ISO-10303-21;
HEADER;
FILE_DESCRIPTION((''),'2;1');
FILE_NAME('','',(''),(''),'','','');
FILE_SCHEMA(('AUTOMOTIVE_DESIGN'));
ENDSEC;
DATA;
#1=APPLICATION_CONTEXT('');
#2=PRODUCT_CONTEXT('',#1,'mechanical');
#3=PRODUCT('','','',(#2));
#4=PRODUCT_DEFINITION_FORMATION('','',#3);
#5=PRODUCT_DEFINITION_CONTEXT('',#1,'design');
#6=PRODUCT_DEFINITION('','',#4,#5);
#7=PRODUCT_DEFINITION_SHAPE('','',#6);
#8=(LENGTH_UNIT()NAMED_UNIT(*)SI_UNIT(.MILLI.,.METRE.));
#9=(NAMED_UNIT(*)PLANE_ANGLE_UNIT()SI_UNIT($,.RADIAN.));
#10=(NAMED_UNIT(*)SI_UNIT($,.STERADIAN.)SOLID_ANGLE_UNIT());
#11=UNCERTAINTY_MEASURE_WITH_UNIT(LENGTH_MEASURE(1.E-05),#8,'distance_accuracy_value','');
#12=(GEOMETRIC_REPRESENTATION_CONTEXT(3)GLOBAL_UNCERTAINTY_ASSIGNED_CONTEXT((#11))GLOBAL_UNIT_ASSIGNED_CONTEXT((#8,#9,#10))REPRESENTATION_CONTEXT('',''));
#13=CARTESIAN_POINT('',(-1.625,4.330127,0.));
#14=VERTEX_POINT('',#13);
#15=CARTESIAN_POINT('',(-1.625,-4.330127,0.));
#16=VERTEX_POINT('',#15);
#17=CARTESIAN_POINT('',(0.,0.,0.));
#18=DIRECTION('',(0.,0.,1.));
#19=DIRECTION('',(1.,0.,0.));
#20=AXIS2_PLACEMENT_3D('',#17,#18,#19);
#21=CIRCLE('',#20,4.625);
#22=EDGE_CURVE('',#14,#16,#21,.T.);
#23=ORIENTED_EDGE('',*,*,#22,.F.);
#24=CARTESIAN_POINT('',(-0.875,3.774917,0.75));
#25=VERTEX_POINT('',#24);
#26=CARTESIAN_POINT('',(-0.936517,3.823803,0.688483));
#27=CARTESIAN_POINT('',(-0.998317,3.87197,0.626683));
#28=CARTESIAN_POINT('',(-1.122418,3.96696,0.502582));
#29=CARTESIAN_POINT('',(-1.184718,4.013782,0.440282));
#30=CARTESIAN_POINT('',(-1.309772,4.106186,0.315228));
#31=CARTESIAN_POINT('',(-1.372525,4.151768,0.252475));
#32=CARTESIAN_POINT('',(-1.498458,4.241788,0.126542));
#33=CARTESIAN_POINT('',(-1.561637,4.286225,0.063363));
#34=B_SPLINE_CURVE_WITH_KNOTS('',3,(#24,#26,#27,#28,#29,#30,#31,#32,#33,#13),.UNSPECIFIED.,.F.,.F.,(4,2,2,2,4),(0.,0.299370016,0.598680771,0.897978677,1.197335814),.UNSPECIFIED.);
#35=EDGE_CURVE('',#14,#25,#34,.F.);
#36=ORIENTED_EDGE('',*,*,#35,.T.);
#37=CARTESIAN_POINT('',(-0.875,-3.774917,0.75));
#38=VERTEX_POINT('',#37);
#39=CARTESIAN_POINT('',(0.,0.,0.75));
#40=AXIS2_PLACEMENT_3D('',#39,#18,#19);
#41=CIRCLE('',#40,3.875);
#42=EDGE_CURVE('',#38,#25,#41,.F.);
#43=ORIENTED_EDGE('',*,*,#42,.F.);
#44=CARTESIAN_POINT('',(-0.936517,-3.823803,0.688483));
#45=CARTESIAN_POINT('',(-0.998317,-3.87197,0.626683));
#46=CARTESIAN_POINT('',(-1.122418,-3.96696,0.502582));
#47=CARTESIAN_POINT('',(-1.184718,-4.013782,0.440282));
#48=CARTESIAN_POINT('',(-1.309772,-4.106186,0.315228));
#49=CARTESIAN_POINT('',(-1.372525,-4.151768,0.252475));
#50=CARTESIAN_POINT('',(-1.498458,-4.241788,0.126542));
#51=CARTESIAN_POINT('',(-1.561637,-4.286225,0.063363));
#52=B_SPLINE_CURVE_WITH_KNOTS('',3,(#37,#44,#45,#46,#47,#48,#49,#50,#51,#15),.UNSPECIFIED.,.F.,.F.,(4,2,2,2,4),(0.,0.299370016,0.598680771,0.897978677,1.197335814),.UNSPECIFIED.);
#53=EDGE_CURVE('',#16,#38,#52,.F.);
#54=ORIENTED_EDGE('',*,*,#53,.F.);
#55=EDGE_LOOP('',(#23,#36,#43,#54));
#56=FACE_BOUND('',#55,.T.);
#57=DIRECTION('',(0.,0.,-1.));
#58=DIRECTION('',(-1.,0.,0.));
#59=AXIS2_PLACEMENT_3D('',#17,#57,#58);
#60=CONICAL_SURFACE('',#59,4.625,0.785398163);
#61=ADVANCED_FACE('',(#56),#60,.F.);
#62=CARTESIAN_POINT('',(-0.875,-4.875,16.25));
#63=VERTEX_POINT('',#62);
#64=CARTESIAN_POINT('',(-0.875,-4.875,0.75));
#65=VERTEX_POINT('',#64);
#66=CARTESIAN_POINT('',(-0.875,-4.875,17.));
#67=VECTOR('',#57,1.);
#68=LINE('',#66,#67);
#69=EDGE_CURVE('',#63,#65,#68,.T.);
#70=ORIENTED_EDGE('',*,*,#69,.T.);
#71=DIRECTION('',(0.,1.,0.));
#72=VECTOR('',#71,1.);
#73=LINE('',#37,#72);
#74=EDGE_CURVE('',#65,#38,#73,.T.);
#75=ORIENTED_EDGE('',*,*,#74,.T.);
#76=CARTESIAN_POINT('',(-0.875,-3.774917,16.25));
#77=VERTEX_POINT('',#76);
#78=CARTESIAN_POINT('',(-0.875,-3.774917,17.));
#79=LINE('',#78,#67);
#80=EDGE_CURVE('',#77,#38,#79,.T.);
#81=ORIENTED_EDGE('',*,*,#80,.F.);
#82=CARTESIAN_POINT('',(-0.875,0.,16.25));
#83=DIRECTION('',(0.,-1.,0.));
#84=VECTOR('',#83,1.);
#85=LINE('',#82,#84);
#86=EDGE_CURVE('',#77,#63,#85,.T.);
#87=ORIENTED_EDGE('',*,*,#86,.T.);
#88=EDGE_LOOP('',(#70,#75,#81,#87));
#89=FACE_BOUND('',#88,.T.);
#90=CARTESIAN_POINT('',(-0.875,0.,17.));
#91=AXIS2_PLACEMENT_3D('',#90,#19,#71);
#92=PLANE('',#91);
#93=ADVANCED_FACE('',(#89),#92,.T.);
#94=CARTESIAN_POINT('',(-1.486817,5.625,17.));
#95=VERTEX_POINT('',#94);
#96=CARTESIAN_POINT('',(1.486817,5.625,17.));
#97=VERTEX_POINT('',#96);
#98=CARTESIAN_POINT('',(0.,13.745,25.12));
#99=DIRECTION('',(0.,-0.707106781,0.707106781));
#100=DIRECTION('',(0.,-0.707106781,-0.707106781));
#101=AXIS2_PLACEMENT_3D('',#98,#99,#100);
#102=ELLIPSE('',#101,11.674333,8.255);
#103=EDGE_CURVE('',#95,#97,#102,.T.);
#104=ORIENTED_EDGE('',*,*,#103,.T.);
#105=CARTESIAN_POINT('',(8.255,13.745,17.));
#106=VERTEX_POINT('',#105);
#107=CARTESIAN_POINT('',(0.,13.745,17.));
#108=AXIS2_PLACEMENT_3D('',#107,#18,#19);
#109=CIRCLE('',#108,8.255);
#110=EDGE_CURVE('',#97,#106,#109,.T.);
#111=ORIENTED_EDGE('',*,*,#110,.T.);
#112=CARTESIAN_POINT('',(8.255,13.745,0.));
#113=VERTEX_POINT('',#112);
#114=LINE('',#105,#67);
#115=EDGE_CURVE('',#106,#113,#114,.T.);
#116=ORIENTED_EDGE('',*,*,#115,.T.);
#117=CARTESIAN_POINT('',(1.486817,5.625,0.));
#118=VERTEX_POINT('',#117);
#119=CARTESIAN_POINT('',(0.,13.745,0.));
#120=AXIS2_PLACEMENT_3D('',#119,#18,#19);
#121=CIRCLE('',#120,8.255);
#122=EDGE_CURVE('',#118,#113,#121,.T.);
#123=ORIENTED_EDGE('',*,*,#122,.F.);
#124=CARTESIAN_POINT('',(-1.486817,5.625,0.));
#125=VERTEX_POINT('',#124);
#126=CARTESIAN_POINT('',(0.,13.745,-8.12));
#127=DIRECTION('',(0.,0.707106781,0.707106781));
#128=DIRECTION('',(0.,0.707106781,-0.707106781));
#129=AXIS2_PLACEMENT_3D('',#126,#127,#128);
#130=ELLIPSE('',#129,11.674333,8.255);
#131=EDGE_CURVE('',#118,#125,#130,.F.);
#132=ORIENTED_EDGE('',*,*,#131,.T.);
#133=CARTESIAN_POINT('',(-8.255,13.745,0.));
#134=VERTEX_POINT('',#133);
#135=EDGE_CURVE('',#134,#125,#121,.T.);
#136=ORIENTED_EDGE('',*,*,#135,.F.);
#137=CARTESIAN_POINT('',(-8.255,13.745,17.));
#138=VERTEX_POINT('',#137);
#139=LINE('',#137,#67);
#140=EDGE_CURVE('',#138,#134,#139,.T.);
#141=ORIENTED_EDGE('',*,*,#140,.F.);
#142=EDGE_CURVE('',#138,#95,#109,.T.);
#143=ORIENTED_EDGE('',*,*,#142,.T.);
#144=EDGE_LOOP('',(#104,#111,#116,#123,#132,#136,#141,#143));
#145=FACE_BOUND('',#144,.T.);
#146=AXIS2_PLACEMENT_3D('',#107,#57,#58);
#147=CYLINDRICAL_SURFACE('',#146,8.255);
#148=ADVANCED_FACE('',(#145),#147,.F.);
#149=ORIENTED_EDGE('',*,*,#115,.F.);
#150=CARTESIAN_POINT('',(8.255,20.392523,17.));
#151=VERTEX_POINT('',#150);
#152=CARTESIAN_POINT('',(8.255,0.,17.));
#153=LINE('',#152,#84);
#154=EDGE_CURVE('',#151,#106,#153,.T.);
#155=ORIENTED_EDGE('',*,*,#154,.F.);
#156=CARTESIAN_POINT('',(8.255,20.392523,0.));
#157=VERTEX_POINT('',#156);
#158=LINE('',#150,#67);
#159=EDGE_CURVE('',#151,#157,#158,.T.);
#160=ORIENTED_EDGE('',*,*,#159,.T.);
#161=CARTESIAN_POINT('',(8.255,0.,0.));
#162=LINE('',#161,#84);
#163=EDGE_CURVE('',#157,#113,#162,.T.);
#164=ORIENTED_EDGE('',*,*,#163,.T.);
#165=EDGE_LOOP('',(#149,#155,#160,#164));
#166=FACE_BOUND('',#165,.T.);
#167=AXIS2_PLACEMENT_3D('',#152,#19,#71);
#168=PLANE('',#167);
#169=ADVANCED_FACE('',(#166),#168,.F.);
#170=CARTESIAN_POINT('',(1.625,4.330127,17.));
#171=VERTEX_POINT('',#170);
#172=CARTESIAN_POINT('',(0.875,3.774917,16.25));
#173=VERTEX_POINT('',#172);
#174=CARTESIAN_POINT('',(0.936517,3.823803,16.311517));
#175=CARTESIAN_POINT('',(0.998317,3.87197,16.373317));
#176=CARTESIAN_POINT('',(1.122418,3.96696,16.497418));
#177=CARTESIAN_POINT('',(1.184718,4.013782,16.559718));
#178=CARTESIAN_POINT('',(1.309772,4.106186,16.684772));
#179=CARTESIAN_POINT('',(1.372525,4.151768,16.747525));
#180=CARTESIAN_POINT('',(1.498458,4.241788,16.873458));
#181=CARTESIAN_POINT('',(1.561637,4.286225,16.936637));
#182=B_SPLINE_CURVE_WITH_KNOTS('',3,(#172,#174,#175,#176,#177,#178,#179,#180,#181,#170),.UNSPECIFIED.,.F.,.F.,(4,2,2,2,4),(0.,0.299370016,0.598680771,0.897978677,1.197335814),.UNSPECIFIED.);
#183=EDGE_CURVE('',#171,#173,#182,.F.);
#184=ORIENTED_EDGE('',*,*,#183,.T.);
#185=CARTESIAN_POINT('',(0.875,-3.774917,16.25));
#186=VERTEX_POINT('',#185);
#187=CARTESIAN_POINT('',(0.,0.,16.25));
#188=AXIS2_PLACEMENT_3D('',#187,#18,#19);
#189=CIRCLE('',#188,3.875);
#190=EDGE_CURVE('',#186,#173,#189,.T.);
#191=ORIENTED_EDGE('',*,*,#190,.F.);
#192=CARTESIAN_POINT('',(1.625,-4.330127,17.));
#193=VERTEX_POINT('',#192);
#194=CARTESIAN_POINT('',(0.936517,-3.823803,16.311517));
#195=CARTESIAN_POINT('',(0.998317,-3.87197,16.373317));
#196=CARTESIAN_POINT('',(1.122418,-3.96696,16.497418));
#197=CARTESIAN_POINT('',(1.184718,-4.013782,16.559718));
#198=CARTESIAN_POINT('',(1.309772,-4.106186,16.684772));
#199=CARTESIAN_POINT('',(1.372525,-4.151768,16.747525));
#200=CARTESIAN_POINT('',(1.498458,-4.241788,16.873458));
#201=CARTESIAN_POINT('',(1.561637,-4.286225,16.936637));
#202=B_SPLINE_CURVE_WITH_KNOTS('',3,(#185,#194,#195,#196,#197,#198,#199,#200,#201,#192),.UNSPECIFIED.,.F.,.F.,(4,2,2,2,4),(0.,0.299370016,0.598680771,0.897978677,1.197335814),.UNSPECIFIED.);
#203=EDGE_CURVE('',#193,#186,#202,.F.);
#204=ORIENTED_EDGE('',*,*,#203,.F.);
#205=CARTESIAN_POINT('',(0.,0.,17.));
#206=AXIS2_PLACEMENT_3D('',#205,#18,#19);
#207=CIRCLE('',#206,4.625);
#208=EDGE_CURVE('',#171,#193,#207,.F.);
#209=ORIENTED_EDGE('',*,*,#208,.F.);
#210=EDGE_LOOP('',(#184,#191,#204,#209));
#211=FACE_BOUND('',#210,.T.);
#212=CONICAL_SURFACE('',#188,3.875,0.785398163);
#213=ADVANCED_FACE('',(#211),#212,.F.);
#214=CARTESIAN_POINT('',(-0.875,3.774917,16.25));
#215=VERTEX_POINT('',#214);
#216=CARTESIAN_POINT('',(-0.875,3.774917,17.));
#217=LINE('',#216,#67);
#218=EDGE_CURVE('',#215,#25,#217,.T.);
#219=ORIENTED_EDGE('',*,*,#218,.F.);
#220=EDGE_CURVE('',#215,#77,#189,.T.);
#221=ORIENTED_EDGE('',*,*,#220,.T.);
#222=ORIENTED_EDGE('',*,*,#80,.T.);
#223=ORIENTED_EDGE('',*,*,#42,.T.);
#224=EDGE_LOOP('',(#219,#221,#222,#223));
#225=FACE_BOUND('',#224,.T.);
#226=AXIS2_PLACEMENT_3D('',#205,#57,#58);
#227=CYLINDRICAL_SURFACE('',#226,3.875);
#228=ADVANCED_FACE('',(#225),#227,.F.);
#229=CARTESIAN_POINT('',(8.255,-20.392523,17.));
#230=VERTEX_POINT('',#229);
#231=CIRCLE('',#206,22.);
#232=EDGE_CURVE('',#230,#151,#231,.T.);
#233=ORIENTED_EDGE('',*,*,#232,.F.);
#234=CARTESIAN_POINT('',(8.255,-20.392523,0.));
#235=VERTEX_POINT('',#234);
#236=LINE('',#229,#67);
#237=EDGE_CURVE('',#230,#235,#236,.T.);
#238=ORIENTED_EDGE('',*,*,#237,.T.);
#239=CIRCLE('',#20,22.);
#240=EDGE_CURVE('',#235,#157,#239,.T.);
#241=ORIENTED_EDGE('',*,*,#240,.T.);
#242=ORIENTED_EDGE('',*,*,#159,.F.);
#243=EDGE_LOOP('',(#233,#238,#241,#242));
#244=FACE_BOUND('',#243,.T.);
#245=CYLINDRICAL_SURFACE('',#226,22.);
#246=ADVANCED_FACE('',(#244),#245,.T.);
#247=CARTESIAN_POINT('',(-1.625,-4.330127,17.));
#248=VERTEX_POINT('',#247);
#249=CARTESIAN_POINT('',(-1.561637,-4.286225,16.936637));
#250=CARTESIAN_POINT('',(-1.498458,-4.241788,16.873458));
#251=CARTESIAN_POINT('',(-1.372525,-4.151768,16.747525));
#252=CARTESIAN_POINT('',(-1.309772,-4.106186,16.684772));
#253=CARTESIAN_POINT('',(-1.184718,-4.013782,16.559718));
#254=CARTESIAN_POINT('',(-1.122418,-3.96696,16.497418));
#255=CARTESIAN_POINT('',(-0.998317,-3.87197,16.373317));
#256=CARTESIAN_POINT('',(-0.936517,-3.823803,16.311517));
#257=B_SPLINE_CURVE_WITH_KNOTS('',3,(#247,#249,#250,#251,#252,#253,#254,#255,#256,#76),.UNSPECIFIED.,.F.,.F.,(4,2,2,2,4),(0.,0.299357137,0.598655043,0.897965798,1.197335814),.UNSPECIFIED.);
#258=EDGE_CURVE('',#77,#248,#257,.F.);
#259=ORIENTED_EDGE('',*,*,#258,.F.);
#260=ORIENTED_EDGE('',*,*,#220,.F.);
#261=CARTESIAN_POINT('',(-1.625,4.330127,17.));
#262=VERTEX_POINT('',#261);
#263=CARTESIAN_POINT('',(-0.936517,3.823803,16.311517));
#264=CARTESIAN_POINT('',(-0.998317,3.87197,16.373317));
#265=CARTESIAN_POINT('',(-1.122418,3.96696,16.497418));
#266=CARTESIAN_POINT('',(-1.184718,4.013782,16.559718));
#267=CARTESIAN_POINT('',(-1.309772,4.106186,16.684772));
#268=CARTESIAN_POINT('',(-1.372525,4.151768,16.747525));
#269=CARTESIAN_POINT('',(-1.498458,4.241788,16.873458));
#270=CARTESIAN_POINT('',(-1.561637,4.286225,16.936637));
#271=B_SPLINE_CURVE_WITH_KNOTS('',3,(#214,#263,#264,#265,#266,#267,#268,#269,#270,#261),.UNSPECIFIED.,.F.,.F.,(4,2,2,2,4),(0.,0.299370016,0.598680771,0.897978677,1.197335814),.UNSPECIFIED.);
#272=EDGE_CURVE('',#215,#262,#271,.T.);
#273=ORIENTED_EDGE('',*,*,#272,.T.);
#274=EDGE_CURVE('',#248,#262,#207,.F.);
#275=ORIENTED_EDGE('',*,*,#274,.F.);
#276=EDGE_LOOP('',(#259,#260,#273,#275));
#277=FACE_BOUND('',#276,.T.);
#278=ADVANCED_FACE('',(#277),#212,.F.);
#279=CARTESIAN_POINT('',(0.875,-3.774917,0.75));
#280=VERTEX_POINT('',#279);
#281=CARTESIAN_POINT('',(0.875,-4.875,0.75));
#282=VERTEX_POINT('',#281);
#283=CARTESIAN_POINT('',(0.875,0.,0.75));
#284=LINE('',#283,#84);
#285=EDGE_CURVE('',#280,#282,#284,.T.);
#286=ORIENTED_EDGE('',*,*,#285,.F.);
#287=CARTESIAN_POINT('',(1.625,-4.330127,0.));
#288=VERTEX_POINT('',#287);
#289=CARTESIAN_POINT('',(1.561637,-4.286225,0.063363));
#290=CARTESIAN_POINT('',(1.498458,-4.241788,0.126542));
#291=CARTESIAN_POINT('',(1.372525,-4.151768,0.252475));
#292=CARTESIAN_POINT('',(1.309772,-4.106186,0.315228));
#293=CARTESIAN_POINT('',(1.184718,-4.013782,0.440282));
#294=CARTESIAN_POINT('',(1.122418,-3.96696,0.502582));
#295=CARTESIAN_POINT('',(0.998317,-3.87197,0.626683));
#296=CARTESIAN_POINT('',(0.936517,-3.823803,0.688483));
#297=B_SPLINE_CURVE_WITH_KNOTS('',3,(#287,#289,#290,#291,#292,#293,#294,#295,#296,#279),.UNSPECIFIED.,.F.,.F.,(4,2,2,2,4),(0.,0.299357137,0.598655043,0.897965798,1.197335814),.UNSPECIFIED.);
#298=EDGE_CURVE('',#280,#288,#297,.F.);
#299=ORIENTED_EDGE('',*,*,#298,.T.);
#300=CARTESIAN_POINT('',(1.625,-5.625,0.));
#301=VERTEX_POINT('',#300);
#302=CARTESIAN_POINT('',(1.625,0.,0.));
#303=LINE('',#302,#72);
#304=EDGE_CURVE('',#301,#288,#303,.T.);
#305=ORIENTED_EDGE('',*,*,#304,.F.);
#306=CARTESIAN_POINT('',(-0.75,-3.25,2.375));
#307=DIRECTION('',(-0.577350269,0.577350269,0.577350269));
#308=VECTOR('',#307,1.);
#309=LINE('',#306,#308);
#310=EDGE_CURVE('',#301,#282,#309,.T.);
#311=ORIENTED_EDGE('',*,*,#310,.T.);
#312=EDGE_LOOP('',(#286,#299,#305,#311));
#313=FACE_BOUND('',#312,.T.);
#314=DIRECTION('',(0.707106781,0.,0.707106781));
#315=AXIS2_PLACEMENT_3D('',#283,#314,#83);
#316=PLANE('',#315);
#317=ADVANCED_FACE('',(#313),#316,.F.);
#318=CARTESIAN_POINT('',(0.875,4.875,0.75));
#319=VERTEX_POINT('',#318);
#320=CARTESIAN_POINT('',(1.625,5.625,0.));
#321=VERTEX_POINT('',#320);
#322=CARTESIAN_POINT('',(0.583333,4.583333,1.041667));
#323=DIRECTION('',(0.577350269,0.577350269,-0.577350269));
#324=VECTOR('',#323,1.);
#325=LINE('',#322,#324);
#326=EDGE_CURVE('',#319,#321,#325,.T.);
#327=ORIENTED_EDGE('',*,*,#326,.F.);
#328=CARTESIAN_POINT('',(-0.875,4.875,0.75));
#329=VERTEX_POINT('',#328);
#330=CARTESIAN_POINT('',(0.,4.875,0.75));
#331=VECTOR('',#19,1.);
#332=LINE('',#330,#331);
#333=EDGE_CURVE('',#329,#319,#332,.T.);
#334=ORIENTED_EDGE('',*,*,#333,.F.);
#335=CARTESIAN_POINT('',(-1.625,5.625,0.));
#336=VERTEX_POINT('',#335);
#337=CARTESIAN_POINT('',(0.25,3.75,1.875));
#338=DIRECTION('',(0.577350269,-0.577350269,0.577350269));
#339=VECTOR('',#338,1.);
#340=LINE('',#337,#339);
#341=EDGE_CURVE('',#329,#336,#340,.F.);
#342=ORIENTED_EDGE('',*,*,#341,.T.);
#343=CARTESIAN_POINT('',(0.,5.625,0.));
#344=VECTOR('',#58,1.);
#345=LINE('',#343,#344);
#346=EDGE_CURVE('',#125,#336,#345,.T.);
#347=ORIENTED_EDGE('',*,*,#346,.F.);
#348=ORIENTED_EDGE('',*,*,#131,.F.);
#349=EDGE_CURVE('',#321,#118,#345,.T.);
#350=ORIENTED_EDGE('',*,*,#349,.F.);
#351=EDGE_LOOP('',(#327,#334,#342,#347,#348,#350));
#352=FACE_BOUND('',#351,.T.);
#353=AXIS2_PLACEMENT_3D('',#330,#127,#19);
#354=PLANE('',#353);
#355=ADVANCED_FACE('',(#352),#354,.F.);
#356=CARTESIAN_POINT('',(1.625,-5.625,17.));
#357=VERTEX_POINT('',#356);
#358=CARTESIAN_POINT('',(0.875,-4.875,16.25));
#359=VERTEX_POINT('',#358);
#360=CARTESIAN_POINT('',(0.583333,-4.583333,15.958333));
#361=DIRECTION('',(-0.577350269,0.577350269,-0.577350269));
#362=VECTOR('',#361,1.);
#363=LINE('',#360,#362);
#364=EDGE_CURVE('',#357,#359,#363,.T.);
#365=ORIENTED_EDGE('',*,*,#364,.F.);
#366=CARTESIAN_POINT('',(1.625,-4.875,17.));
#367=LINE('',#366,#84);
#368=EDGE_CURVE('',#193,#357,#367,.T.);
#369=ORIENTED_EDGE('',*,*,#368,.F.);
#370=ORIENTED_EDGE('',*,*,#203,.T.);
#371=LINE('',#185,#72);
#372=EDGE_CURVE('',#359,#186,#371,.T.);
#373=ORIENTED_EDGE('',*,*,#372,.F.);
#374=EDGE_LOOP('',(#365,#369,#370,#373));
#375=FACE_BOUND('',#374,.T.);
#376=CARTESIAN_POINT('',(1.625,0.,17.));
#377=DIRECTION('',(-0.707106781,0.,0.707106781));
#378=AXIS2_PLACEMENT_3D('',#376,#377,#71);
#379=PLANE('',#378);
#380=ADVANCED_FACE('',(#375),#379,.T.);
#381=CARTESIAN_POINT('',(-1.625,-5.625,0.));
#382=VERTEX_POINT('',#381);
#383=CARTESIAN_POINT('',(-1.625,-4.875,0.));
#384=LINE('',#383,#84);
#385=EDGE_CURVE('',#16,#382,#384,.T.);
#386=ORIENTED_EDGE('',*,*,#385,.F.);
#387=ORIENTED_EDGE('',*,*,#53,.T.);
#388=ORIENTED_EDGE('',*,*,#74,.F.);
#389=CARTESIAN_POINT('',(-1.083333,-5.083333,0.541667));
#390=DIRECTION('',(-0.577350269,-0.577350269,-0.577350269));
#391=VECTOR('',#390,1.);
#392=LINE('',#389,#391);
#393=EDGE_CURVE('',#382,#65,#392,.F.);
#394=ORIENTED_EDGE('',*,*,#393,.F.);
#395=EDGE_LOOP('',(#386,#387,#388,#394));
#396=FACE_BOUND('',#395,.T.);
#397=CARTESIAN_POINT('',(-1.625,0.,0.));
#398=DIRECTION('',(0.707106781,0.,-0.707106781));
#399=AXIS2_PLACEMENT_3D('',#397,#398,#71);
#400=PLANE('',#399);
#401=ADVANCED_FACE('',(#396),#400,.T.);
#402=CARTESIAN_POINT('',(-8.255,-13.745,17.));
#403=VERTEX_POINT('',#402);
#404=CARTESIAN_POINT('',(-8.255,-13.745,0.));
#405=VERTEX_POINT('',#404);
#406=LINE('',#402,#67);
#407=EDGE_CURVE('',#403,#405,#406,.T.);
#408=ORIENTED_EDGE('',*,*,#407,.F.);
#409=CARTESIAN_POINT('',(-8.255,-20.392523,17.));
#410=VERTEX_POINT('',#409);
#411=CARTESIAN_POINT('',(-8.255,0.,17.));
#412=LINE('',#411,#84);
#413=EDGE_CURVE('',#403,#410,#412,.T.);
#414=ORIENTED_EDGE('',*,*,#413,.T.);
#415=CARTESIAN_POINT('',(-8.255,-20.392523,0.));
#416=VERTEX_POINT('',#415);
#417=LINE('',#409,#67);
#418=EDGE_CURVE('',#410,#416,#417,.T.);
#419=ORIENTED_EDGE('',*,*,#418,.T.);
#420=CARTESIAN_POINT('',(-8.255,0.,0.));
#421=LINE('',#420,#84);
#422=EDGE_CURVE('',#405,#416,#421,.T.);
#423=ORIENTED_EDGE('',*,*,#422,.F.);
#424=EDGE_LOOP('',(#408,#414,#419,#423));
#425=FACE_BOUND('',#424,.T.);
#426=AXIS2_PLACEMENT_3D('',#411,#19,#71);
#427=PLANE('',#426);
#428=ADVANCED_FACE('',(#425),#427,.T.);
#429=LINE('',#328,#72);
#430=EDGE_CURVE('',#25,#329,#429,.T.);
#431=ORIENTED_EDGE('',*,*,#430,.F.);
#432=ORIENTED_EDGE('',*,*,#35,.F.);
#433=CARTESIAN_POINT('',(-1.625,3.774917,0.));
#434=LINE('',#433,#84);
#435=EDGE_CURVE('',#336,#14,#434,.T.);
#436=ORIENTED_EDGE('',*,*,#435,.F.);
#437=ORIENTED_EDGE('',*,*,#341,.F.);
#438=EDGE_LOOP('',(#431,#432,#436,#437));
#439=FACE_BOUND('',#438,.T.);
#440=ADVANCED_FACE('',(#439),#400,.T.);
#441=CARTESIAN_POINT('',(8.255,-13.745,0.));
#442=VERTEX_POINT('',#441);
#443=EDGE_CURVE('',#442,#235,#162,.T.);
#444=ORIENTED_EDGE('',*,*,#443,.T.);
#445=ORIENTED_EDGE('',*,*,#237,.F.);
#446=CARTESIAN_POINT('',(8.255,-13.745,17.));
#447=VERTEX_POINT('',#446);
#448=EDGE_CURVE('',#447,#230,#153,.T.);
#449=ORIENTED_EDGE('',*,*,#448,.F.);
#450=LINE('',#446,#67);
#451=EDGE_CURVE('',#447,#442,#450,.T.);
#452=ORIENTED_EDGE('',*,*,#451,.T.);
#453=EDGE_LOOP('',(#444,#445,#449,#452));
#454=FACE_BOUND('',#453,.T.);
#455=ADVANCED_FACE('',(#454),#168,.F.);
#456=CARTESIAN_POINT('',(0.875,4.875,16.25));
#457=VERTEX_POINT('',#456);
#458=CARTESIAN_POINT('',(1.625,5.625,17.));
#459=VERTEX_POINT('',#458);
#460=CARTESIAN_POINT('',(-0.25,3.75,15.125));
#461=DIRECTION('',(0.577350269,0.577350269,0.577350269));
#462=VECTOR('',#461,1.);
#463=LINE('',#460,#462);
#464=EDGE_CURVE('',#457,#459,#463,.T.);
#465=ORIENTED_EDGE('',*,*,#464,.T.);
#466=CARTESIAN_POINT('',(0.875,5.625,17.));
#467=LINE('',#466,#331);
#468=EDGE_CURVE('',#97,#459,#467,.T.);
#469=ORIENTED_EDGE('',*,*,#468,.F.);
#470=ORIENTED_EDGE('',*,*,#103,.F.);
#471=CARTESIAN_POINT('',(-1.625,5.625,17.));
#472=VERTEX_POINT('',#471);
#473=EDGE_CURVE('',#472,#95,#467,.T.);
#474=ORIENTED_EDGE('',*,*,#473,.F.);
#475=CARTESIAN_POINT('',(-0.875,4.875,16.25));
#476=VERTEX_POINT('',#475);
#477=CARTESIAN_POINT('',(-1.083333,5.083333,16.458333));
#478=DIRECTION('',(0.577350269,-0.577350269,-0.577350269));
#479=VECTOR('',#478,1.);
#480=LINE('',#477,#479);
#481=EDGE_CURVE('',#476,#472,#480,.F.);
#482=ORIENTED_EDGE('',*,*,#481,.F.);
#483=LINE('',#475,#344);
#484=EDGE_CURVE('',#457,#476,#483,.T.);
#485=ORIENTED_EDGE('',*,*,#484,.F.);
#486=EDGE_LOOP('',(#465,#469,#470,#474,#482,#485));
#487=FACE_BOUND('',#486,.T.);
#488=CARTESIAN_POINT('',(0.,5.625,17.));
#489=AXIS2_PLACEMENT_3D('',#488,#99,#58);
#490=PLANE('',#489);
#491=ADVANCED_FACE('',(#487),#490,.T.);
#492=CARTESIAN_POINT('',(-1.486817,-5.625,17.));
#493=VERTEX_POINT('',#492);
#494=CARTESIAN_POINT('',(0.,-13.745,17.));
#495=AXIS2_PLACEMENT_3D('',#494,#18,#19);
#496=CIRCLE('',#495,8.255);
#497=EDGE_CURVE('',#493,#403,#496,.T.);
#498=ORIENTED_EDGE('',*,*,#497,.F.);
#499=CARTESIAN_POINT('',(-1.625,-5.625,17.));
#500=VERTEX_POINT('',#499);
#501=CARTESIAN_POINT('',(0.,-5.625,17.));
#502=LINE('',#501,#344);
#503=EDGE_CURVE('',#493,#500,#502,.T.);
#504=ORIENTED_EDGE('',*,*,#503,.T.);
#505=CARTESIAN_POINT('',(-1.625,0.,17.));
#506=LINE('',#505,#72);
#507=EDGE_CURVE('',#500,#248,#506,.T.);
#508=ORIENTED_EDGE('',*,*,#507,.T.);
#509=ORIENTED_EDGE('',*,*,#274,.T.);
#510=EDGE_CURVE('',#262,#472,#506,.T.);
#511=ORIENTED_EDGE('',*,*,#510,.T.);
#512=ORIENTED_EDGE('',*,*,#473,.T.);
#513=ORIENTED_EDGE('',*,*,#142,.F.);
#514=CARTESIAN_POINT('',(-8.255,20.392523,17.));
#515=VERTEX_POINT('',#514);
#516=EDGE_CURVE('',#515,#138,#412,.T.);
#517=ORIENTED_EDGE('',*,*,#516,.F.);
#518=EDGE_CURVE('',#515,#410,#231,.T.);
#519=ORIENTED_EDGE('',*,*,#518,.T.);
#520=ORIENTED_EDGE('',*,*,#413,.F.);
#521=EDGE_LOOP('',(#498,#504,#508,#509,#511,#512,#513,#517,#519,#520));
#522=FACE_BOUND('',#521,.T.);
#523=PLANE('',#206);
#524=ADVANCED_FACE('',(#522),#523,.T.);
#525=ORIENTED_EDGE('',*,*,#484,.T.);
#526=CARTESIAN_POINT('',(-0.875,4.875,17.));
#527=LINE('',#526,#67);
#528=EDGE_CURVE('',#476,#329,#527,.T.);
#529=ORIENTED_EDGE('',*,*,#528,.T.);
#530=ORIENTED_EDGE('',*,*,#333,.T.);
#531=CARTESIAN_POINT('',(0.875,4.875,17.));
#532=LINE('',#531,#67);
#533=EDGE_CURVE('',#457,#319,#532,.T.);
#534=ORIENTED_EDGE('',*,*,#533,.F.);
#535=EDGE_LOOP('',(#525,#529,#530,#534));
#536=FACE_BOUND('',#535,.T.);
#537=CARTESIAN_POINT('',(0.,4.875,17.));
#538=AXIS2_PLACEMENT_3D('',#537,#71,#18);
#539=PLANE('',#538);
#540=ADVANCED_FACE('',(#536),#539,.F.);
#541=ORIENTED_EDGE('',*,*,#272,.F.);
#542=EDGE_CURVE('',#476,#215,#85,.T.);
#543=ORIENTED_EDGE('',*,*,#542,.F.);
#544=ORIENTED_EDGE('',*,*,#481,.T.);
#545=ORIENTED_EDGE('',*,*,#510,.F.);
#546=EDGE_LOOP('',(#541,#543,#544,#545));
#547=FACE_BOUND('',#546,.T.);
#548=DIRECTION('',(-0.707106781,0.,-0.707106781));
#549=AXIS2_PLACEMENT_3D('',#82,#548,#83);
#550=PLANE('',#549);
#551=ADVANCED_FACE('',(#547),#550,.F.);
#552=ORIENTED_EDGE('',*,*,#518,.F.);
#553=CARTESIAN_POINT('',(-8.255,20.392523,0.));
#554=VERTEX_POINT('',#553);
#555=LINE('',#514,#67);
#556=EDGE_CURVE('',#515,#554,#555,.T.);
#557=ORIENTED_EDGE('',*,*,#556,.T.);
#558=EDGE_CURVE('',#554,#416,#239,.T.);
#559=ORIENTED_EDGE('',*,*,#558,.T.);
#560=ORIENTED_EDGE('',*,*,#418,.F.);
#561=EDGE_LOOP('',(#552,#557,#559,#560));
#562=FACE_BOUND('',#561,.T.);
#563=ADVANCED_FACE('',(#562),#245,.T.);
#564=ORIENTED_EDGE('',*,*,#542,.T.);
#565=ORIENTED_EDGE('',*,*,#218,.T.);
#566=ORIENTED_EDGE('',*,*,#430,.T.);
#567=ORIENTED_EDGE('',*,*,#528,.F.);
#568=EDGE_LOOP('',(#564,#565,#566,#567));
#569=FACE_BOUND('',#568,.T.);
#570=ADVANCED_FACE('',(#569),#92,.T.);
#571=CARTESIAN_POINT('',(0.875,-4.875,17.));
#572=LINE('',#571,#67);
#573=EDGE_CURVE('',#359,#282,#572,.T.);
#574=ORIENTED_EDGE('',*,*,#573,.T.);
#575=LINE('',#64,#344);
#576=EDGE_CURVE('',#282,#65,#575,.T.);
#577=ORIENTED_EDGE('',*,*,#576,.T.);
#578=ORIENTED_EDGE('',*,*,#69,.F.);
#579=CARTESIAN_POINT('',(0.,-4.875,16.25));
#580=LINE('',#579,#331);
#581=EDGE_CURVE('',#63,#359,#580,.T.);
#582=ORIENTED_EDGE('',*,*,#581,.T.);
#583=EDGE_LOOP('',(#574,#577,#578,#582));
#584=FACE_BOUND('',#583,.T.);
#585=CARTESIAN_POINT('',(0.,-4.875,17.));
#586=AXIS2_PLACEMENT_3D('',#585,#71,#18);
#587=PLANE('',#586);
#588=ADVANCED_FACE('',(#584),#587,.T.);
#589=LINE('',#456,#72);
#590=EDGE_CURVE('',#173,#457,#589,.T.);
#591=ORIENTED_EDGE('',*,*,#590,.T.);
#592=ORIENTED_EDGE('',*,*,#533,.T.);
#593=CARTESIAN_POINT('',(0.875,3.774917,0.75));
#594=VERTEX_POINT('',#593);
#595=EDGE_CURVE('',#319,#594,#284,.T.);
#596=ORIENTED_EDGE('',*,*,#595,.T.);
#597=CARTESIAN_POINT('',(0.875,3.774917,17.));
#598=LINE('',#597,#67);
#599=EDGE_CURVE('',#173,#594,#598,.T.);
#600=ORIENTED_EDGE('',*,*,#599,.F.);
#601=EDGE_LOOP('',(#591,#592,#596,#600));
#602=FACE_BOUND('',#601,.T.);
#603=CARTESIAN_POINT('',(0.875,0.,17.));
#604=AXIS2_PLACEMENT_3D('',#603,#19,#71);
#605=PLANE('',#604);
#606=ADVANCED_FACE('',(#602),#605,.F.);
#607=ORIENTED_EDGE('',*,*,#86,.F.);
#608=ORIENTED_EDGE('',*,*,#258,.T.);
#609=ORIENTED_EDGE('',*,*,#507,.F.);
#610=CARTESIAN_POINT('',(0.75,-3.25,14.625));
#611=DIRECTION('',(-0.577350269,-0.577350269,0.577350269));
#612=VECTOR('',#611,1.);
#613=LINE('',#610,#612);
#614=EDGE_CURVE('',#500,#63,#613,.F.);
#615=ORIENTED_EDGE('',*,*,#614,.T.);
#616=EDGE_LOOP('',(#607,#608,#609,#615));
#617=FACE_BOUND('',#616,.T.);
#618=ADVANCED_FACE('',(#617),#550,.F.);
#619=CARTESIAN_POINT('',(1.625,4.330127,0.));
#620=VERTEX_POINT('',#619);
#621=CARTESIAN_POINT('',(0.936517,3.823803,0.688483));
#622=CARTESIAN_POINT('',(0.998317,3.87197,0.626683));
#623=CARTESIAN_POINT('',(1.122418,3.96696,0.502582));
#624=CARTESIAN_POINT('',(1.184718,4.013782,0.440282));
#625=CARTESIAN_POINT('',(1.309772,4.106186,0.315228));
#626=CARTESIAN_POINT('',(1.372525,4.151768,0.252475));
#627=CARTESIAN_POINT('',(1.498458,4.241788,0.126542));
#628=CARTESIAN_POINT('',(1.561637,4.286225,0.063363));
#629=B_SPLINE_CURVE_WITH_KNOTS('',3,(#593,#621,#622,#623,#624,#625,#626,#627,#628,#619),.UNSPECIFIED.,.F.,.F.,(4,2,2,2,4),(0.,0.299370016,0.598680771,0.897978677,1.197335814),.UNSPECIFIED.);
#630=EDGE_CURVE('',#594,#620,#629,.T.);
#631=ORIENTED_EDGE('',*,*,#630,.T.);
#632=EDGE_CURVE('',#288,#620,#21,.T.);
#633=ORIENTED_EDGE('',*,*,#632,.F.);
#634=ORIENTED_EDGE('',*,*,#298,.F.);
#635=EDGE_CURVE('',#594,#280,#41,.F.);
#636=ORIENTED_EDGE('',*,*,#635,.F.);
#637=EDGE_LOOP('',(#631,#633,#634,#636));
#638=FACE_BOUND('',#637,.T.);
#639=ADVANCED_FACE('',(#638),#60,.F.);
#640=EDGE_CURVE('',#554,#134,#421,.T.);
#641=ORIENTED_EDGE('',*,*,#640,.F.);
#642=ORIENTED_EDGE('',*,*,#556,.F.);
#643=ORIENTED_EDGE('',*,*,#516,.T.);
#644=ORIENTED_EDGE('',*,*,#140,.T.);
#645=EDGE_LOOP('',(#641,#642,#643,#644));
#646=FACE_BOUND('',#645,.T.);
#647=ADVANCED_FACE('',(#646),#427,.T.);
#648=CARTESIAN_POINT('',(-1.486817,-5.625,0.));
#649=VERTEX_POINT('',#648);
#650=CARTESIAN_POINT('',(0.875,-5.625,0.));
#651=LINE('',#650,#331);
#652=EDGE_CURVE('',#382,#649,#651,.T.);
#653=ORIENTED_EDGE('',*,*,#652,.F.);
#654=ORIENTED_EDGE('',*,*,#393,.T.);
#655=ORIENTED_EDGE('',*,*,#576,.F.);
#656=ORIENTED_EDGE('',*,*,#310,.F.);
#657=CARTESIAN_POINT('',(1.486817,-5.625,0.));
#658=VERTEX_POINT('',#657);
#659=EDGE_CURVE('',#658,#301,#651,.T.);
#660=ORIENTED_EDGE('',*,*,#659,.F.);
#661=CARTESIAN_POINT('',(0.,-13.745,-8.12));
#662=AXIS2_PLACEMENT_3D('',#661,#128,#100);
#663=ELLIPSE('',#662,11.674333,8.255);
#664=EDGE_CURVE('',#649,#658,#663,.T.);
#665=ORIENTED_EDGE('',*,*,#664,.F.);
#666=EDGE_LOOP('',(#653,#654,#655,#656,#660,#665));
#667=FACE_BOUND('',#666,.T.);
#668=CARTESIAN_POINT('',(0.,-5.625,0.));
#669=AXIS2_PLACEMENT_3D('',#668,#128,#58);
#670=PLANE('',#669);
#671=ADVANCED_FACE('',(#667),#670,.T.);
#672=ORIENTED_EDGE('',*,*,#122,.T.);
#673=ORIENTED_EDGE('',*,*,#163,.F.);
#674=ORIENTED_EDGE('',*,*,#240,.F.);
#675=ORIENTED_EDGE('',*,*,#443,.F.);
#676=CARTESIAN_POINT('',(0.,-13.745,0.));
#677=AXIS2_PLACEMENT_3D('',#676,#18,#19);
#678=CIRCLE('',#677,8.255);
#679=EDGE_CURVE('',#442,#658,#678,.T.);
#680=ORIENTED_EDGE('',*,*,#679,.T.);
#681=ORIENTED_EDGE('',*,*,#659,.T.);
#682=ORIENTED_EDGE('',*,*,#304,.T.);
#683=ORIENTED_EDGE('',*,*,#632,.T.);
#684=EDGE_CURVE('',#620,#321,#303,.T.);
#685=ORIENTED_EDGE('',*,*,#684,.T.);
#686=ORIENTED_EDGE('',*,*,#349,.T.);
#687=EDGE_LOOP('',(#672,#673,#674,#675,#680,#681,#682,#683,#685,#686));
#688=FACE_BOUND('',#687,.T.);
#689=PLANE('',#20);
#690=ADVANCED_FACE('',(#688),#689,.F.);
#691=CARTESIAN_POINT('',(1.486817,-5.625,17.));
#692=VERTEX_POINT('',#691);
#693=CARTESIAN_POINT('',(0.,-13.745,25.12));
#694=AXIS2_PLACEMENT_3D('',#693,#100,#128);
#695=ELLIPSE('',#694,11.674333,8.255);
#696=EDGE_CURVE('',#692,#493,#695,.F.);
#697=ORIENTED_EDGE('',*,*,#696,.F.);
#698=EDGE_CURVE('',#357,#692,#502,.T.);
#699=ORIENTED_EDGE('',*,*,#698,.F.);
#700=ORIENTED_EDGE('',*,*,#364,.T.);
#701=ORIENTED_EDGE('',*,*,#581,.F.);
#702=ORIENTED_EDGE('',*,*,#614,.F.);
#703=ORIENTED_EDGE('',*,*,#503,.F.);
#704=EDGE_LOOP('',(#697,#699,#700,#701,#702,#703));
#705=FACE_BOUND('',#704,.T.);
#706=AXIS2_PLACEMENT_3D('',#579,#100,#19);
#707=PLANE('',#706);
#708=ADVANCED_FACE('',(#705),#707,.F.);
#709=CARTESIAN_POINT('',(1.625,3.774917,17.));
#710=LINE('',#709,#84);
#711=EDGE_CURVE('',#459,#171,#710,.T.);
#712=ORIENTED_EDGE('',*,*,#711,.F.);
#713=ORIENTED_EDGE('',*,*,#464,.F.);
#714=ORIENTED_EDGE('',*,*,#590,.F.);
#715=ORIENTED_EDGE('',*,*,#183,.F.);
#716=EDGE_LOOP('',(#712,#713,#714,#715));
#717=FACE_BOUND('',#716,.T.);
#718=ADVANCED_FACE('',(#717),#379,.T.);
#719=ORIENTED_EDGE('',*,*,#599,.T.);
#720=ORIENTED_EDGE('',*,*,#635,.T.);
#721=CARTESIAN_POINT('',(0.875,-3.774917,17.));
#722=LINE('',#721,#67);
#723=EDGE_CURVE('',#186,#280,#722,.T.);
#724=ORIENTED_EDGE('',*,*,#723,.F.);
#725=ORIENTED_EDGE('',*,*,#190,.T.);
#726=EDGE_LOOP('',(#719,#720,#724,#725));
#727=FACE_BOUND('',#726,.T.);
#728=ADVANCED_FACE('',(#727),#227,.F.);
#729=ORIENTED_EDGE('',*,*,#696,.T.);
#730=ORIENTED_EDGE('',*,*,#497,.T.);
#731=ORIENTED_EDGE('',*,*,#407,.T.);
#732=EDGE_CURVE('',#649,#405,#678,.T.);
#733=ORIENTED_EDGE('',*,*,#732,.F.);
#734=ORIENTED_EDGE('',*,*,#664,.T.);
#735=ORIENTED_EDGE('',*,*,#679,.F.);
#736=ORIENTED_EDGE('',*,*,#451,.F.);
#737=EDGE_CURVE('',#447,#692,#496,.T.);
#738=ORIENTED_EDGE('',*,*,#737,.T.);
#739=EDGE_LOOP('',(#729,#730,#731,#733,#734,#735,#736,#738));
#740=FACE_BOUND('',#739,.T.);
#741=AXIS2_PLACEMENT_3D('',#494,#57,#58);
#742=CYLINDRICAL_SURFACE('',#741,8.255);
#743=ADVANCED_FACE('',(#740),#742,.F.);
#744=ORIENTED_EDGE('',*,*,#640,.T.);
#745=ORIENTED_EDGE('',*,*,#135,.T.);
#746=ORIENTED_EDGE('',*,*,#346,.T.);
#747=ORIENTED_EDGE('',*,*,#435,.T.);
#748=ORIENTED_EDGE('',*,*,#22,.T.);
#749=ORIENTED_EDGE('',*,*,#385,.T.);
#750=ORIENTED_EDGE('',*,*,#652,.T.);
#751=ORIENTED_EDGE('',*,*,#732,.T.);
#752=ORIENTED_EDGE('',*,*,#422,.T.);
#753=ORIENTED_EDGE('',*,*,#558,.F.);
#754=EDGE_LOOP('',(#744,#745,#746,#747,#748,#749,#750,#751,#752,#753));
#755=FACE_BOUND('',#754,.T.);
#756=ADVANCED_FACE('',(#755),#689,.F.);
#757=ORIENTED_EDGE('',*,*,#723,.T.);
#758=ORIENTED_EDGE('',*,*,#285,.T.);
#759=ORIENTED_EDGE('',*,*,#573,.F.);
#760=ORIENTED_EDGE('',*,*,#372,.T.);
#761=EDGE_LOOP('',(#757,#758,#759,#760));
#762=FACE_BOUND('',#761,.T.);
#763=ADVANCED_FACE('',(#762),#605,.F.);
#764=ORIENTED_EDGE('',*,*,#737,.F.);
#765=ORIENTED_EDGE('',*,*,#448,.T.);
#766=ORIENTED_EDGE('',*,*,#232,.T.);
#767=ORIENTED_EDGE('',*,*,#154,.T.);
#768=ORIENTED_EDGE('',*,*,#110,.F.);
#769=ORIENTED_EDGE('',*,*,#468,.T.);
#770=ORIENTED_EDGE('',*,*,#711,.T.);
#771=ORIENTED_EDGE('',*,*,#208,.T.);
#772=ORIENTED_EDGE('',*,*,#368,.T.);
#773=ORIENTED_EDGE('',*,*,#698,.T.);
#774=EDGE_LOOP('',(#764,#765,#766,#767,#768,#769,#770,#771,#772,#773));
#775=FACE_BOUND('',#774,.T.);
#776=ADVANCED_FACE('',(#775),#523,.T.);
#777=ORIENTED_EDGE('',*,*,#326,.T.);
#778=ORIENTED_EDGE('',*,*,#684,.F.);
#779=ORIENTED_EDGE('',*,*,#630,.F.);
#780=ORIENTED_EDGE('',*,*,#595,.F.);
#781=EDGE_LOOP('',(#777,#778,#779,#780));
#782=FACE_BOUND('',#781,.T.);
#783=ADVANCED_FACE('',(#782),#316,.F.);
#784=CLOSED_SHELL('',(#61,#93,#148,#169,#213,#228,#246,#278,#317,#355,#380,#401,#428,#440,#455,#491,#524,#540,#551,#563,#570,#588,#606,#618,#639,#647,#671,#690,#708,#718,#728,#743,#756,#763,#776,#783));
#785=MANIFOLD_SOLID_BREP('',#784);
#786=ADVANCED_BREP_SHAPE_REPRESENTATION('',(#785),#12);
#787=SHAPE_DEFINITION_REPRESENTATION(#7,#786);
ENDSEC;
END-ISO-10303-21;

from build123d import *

# Parameters (mm, degrees)
BOSS_EXTRUDE1_DEPTH = 17
CHAMFER1_SIZE       = 0.75
CHAMFER2_SIZE       = 0.75


with BuildPart() as part:
    # Sketch1 → Boss-Extrude1 (new body)
    # profile 1 of 3: a face of its own
    with BuildSketch(Plane.XY):
        with BuildLine():
            Line((-8.255, 13.745), (-8.255, 20.392522527))
            ThreePointArc((-8.255, 20.392522527), (-22, 0), (-8.255, -20.392522527))
            Line((-8.255, -20.392522527), (-8.255, -13.745000015))
            Line((-8.255, -13.745000015), (-8.255, 13.745))
        make_face()
    # profile 2 of 3: a face of its own
    with BuildSketch(Plane.XY):
        with BuildLine():
            ThreePointArc((22, 0), (18.242943841, 12.296137605), (8.255, 20.392522527))
            Line((8.255, 20.392522527), (8.255, 13.745))
            Line((8.255, 13.745), (8.255, -13.745))
            Line((8.255, -13.745), (8.255, -20.392522527))
            ThreePointArc((8.255, -20.392522527), (18.242943841, -12.296137605), (22, 0))
        make_face()
    # profile 3 of 3: a face of its own
    with BuildSketch(Plane.XY):
        with BuildLine():
            ThreePointArc((8.255, 13.745), (0, 5.49), (-8.255, 13.745))
            Line((-8.255, 13.745), (-8.255, -13.745000015))
            ThreePointArc((-8.255, -13.745000015), (-7e-09, -5.49), (8.255, -13.745))
            Line((8.255, -13.745), (8.255, 13.745))
        make_face()
        with BuildLine():
            Line((-0.875, 3.774917218), (-0.875, 4.875))
            Line((-0.875, 4.875), (0.875, 4.875))
            Line((0.875, 4.875), (0.875, 3.774917218))
            ThreePointArc((0.875, 3.774917218), (3.033665275, 2.41091269), (3.875, 0))
            ThreePointArc((3.875, 0), (3.033665275, -2.41091269), (0.875, -3.774917218))
            Line((0.875, -3.774917218), (0.875, -4.875))
            Line((0.875, -4.875), (-0.875, -4.875))
            Line((-0.875, -4.875), (-0.875, -3.774917218))
            ThreePointArc((-0.875, -3.774917218), (-3.875, 0), (-0.875, 3.774917218))
        make_face(mode=Mode.SUBTRACT)
    extrude(amount=BOSS_EXTRUDE1_DEPTH)

    # Chamfer1
    # the kernel refuses this chamfer: 0.75 mm, written as the material it takes off along each edge
    with BuildSketch(Plane(origin=(-0.875, -4.875, 0), x_dir=(-1, 0, 0), z_dir=(0, 1, 0)), Plane(origin=(0.875, -1.846154977, 0), x_dir=(1, 0, 0), z_dir=(0, -1, 0)), Plane(origin=(0.875, 4.875, 0), x_dir=(1, 0, 0), z_dir=(0, -1, 0)), Plane(origin=(-0.875, 1.846154977, 0), x_dir=(-1, 0, 0), z_dir=(0, 1, 0))) as chamfer1_piece_1:
        Polygon((CHAMFER1_SIZE, 0), (0, CHAMFER1_SIZE), (0, 0), align=None)
    extrude(amount=3.028845023, mode=Mode.SUBTRACT)
    with BuildSketch(Plane(origin=(0.875, -4.875, 0), x_dir=(0, -1, 0), z_dir=(-1, 0, 0)), Plane(origin=(-0.875, 4.875, 0), x_dir=(0, 1, 0), z_dir=(1, 0, 0))) as chamfer1_piece_2:
        Polygon((CHAMFER1_SIZE, 0), (0, CHAMFER1_SIZE), (0, 0), align=None)
    extrude(amount=1.75, mode=Mode.SUBTRACT)
    with BuildSketch(Plane(origin=(0, 0, 0), x_dir=(-0.26727041794230744, 0.9636215666395933, 0), z_dir=(-0.9636215666395933, -0.26727041794230744, 0))) as chamfer1_piece_3:
        Polygon((3.875 + CHAMFER1_SIZE, 0), (3.875, -CHAMFER1_SIZE), (3.875, 0), align=None)
    revolve(axis=Axis((0, 0, 0), (0, 0, -1)), revolution_arc=211.003810324, mode=Mode.SUBTRACT)
    with BuildSketch(Plane(origin=(0, 0, 0), x_dir=(0.2672704179423268, -0.963621566639588, 0), z_dir=(0.963621566639588, 0.2672704179423268, 0))) as chamfer1_piece_4:
        Polygon((3.875 + CHAMFER1_SIZE, 0), (3.875, -CHAMFER1_SIZE), (3.875, 0), align=None)
    revolve(axis=Axis((0, 0, 0), (0, 0, -1)), revolution_arc=211.003810324, mode=Mode.SUBTRACT)
    with BuildSketch(Plane(origin=(0.875, -4.875, 0), x_dir=(0, -1, 0), z_dir=(-1, 0, 0))) as chamfer1_piece_5a_section:
        Polygon((CHAMFER1_SIZE, 0), (0, CHAMFER1_SIZE), (0, 0), align=None)
    chamfer1_piece_5a = extrude(amount=3.678762241, mode=Mode.PRIVATE)
    chamfer1_piece_5a = chamfer1_piece_5a - Plane(origin=(0, -13.745, 0), x_dir=(-1.0, -1.8151489867665974e-09, 0), z_dir=(0, 0, -1)) * Cylinder(8.255, 11, mode=Mode.PRIVATE)
    chamfer1_piece_5a = split(chamfer1_piece_5a, bisect_by=Plane(origin=(-0.875, -4.875, 0), z_dir=(-1, 0, 0)), keep=Keep.TOP, mode=Mode.PRIVATE)
    with BuildSketch(Plane(origin=(-0.875, -6.803762241, 0), x_dir=(-1, 0, 0), z_dir=(0, 1, 0))) as chamfer1_piece_5b_section:
        Polygon((CHAMFER1_SIZE, 0), (0, CHAMFER1_SIZE), (0, 0), align=None)
    chamfer1_piece_5b = extrude(amount=4.957607264, mode=Mode.PRIVATE)
    chamfer1_piece_5b = chamfer1_piece_5b - Plane(origin=(0, -13.745, 0), x_dir=(-1.0, -1.8151489867665974e-09, 0), z_dir=(0, 0, -1)) * Cylinder(8.255, 13, mode=Mode.PRIVATE)
    chamfer1_piece_5b = split(chamfer1_piece_5b, bisect_by=Plane(origin=(-0.875, -4.875, 0), z_dir=(0, -1, 0)), keep=Keep.TOP, mode=Mode.PRIVATE)
    chamfer1_piece_5 = chamfer1_piece_5a & chamfer1_piece_5b
    add(chamfer1_piece_5, mode=Mode.SUBTRACT)
    with BuildSketch(Plane(origin=(0.875, -1.846154977, 0), x_dir=(1, 0, 0), z_dir=(0, -1, 0))) as chamfer1_piece_6a_section:
        Polygon((CHAMFER1_SIZE, 0), (0, CHAMFER1_SIZE), (0, 0), align=None)
    chamfer1_piece_6a = extrude(amount=4.957607264, mode=Mode.PRIVATE)
    chamfer1_piece_6a = chamfer1_piece_6a - Plane(origin=(0, -13.745, 0), x_dir=(-1.0, -1.8151489867665974e-09, 0), z_dir=(0, 0, -1)) * Cylinder(8.255, 13, mode=Mode.PRIVATE)
    chamfer1_piece_6a = split(chamfer1_piece_6a, bisect_by=Plane(origin=(0.875, -4.875, 0), z_dir=(0, -1, 0)), keep=Keep.TOP, mode=Mode.PRIVATE)
    with BuildSketch(Plane(origin=(2.803762241, -4.875, 0), x_dir=(0, -1, 0), z_dir=(-1, 0, 0))) as chamfer1_piece_6b_section:
        Polygon((CHAMFER1_SIZE, 0), (0, CHAMFER1_SIZE), (0, 0), align=None)
    chamfer1_piece_6b = extrude(amount=3.678762241, mode=Mode.PRIVATE)
    chamfer1_piece_6b = chamfer1_piece_6b - Plane(origin=(0, -13.745, 0), x_dir=(-1.0, -1.8151489867665974e-09, 0), z_dir=(0, 0, -1)) * Cylinder(8.255, 11, mode=Mode.PRIVATE)
    chamfer1_piece_6b = split(chamfer1_piece_6b, bisect_by=Plane(origin=(0.875, -4.875, 0), z_dir=(1, 0, 0)), keep=Keep.TOP, mode=Mode.PRIVATE)
    chamfer1_piece_6 = chamfer1_piece_6a & chamfer1_piece_6b
    add(chamfer1_piece_6, mode=Mode.SUBTRACT)
    with BuildSketch(Plane(origin=(-0.875, 4.875, 0), x_dir=(0, 1, 0), z_dir=(1, 0, 0))) as chamfer1_piece_7a_section:
        Polygon((CHAMFER1_SIZE, 0), (0, CHAMFER1_SIZE), (0, 0), align=None)
    chamfer1_piece_7a = extrude(amount=3.678762241, mode=Mode.PRIVATE)
    chamfer1_piece_7a = chamfer1_piece_7a - Plane(origin=(0, 13.745, 0), x_dir=(1, 0, 0), z_dir=(0, 0, -1)) * Cylinder(8.255, 11, mode=Mode.PRIVATE)
    chamfer1_piece_7a = split(chamfer1_piece_7a, bisect_by=Plane(origin=(0.875, 4.875, 0), z_dir=(1, 0, 0)), keep=Keep.TOP, mode=Mode.PRIVATE)
    with BuildSketch(Plane(origin=(0.875, 6.803762241, 0), x_dir=(1, 0, 0), z_dir=(0, -1, 0))) as chamfer1_piece_7b_section:
        Polygon((CHAMFER1_SIZE, 0), (0, CHAMFER1_SIZE), (0, 0), align=None)
    chamfer1_piece_7b = extrude(amount=4.957607264, mode=Mode.PRIVATE)
    chamfer1_piece_7b = chamfer1_piece_7b - Plane(origin=(0, 13.745, 0), x_dir=(1, 0, 0), z_dir=(0, 0, -1)) * Cylinder(8.255, 13, mode=Mode.PRIVATE)
    chamfer1_piece_7b = split(chamfer1_piece_7b, bisect_by=Plane(origin=(0.875, 4.875, 0), z_dir=(0, 1, 0)), keep=Keep.TOP, mode=Mode.PRIVATE)
    chamfer1_piece_7 = chamfer1_piece_7a & chamfer1_piece_7b
    add(chamfer1_piece_7, mode=Mode.SUBTRACT)
    with BuildSketch(Plane(origin=(-0.875, 1.846154977, 0), x_dir=(-1, 0, 0), z_dir=(0, 1, 0))) as chamfer1_piece_8a_section:
        Polygon((CHAMFER1_SIZE, 0), (0, CHAMFER1_SIZE), (0, 0), align=None)
    chamfer1_piece_8a = extrude(amount=4.957607264, mode=Mode.PRIVATE)
    chamfer1_piece_8a = chamfer1_piece_8a - Plane(origin=(0, 13.745, 0), x_dir=(1, 0, 0), z_dir=(0, 0, -1)) * Cylinder(8.255, 13, mode=Mode.PRIVATE)
    chamfer1_piece_8a = split(chamfer1_piece_8a, bisect_by=Plane(origin=(-0.875, 4.875, 0), z_dir=(0, 1, 0)), keep=Keep.TOP, mode=Mode.PRIVATE)
    with BuildSketch(Plane(origin=(-2.803762241, 4.875, 0), x_dir=(0, 1, 0), z_dir=(1, 0, 0))) as chamfer1_piece_8b_section:
        Polygon((CHAMFER1_SIZE, 0), (0, CHAMFER1_SIZE), (0, 0), align=None)
    chamfer1_piece_8b = extrude(amount=3.678762241, mode=Mode.PRIVATE)
    chamfer1_piece_8b = chamfer1_piece_8b - Plane(origin=(0, 13.745, 0), x_dir=(1, 0, 0), z_dir=(0, 0, -1)) * Cylinder(8.255, 11, mode=Mode.PRIVATE)
    chamfer1_piece_8b = split(chamfer1_piece_8b, bisect_by=Plane(origin=(-0.875, 4.875, 0), z_dir=(-1, 0, 0)), keep=Keep.TOP, mode=Mode.PRIVATE)
    chamfer1_piece_8 = chamfer1_piece_8a & chamfer1_piece_8b
    add(chamfer1_piece_8, mode=Mode.SUBTRACT)

    # Chamfer2
    # the kernel refuses this chamfer: 0.75 mm, written as the material it takes off along each edge
    with BuildSketch(Plane(origin=(0, 0, 17), x_dir=(0.2672704179423268, -0.963621566639588, 0), z_dir=(0.963621566639588, 0.2672704179423268, 0))) as chamfer2_piece_1:
        Polygon((3.875 + CHAMFER2_SIZE, 0), (3.875, CHAMFER2_SIZE), (3.875, 0), align=None)
    revolve(axis=Axis((0, 0, 17), (0, 0, -1)), revolution_arc=211.003810324, mode=Mode.SUBTRACT)
    with BuildSketch(Plane(origin=(-0.875, 1.846154977, 17), x_dir=(-1, 0, 0), z_dir=(0, 1, 0)), Plane(origin=(0.875, 4.875, 17), x_dir=(1, 0, 0), z_dir=(0, -1, 0)), Plane(origin=(0.875, -1.846154977, 17), x_dir=(1, 0, 0), z_dir=(0, -1, 0)), Plane(origin=(-0.875, -4.875, 17), x_dir=(-1, 0, 0), z_dir=(0, 1, 0))) as chamfer2_piece_2:
        Polygon((CHAMFER2_SIZE, 0), (0, -CHAMFER2_SIZE), (0, 0), align=None)
    extrude(amount=3.028845023, mode=Mode.SUBTRACT)
    with BuildSketch(Plane(origin=(-0.875, 4.875, 17), x_dir=(0, 1, 0), z_dir=(1, 0, 0)), Plane(origin=(0.875, -4.875, 17), x_dir=(0, -1, 0), z_dir=(-1, 0, 0))) as chamfer2_piece_3:
        Polygon((CHAMFER2_SIZE, 0), (0, -CHAMFER2_SIZE), (0, 0), align=None)
    extrude(amount=1.75, mode=Mode.SUBTRACT)
    with BuildSketch(Plane(origin=(0, 0, 17), x_dir=(-0.26727041794230755, -0.9636215666395933, 0), z_dir=(-0.9636215666395933, 0.26727041794230755, 0))) as chamfer2_piece_4:
        Polygon((3.875 + CHAMFER2_SIZE, 0), (3.875, -CHAMFER2_SIZE), (3.875, 0), align=None)
    revolve(axis=Axis((0, 0, 17), (0, 0, 1)), revolution_arc=211.003810324, mode=Mode.SUBTRACT)
    with BuildSketch(Plane(origin=(-0.875, 1.846154977, 17), x_dir=(-1, 0, 0), z_dir=(0, 1, 0))) as chamfer2_piece_5a_section:
        Polygon((CHAMFER2_SIZE, 0), (0, -CHAMFER2_SIZE), (0, 0), align=None)
    chamfer2_piece_5a = extrude(amount=4.957607264, mode=Mode.PRIVATE)
    chamfer2_piece_5a = split(chamfer2_piece_5a, bisect_by=Plane(origin=(-0.875, 4.875, 17), z_dir=(0, 1, 0)), keep=Keep.TOP, mode=Mode.PRIVATE)
    chamfer2_piece_5a = chamfer2_piece_5a - Plane(origin=(0, 13.745, 17), x_dir=(1, 0, 0), z_dir=(0, 0, -1)) * Cylinder(8.255, 13, mode=Mode.PRIVATE)
    with BuildSketch(Plane(origin=(-2.803762241, 4.875, 17), x_dir=(0, 1, 0), z_dir=(1, 0, 0))) as chamfer2_piece_5b_section:
        Polygon((CHAMFER2_SIZE, 0), (0, -CHAMFER2_SIZE), (0, 0), align=None)
    chamfer2_piece_5b = extrude(amount=3.678762241, mode=Mode.PRIVATE)
    chamfer2_piece_5b = split(chamfer2_piece_5b, bisect_by=Plane(origin=(-0.875, 4.875, 17), z_dir=(-1, 0, 0)), keep=Keep.TOP, mode=Mode.PRIVATE)
    chamfer2_piece_5b = chamfer2_piece_5b - Plane(origin=(0, 13.745, 17), x_dir=(1, 0, 0), z_dir=(0, 0, -1)) * Cylinder(8.255, 11, mode=Mode.PRIVATE)
    chamfer2_piece_5 = chamfer2_piece_5a & chamfer2_piece_5b
    add(chamfer2_piece_5, mode=Mode.SUBTRACT)
    with BuildSketch(Plane(origin=(-0.875, 4.875, 17), x_dir=(0, 1, 0), z_dir=(1, 0, 0))) as chamfer2_piece_6a_section:
        Polygon((CHAMFER2_SIZE, 0), (0, -CHAMFER2_SIZE), (0, 0), align=None)
    chamfer2_piece_6a = extrude(amount=3.678762241, mode=Mode.PRIVATE)
    chamfer2_piece_6a = split(chamfer2_piece_6a, bisect_by=Plane(origin=(0.875, 4.875, 17), z_dir=(1, 0, 0)), keep=Keep.TOP, mode=Mode.PRIVATE)
    chamfer2_piece_6a = chamfer2_piece_6a - Plane(origin=(0, 13.745, 17), x_dir=(1, 0, 0), z_dir=(0, 0, -1)) * Cylinder(8.255, 11, mode=Mode.PRIVATE)
    with BuildSketch(Plane(origin=(0.875, 6.803762241, 17), x_dir=(1, 0, 0), z_dir=(0, -1, 0))) as chamfer2_piece_6b_section:
        Polygon((CHAMFER2_SIZE, 0), (0, -CHAMFER2_SIZE), (0, 0), align=None)
    chamfer2_piece_6b = extrude(amount=4.957607264, mode=Mode.PRIVATE)
    chamfer2_piece_6b = split(chamfer2_piece_6b, bisect_by=Plane(origin=(0.875, 4.875, 17), z_dir=(0, 1, 0)), keep=Keep.TOP, mode=Mode.PRIVATE)
    chamfer2_piece_6b = chamfer2_piece_6b - Plane(origin=(0, 13.745, 17), x_dir=(1, 0, 0), z_dir=(0, 0, -1)) * Cylinder(8.255, 13, mode=Mode.PRIVATE)
    chamfer2_piece_6 = chamfer2_piece_6a & chamfer2_piece_6b
    add(chamfer2_piece_6, mode=Mode.SUBTRACT)
    with BuildSketch(Plane(origin=(0.875, -1.846154977, 17), x_dir=(1, 0, 0), z_dir=(0, -1, 0))) as chamfer2_piece_7a_section:
        Polygon((CHAMFER2_SIZE, 0), (0, -CHAMFER2_SIZE), (0, 0), align=None)
    chamfer2_piece_7a = extrude(amount=4.957607264, mode=Mode.PRIVATE)
    chamfer2_piece_7a = split(chamfer2_piece_7a, bisect_by=Plane(origin=(0.875, -4.875, 17), z_dir=(0, -1, 0)), keep=Keep.TOP, mode=Mode.PRIVATE)
    chamfer2_piece_7a = chamfer2_piece_7a - Plane(origin=(0, -13.745, 17), x_dir=(-1.0, -1.8151489867665974e-09, 0), z_dir=(0, 0, -1)) * Cylinder(8.255, 13, mode=Mode.PRIVATE)
    with BuildSketch(Plane(origin=(2.803762241, -4.875, 17), x_dir=(0, -1, 0), z_dir=(-1, 0, 0))) as chamfer2_piece_7b_section:
        Polygon((CHAMFER2_SIZE, 0), (0, -CHAMFER2_SIZE), (0, 0), align=None)
    chamfer2_piece_7b = extrude(amount=3.678762241, mode=Mode.PRIVATE)
    chamfer2_piece_7b = split(chamfer2_piece_7b, bisect_by=Plane(origin=(0.875, -4.875, 17), z_dir=(1, 0, 0)), keep=Keep.TOP, mode=Mode.PRIVATE)
    chamfer2_piece_7b = chamfer2_piece_7b - Plane(origin=(0, -13.745, 17), x_dir=(-1.0, -1.8151489867665974e-09, 0), z_dir=(0, 0, -1)) * Cylinder(8.255, 11, mode=Mode.PRIVATE)
    chamfer2_piece_7 = chamfer2_piece_7a & chamfer2_piece_7b
    add(chamfer2_piece_7, mode=Mode.SUBTRACT)
    with BuildSketch(Plane(origin=(0.875, -4.875, 17), x_dir=(0, -1, 0), z_dir=(-1, 0, 0))) as chamfer2_piece_8a_section:
        Polygon((CHAMFER2_SIZE, 0), (0, -CHAMFER2_SIZE), (0, 0), align=None)
    chamfer2_piece_8a = extrude(amount=3.678762241, mode=Mode.PRIVATE)
    chamfer2_piece_8a = split(chamfer2_piece_8a, bisect_by=Plane(origin=(-0.875, -4.875, 17), z_dir=(-1, 0, 0)), keep=Keep.TOP, mode=Mode.PRIVATE)
    chamfer2_piece_8a = chamfer2_piece_8a - Plane(origin=(0, -13.745, 17), x_dir=(-1.0, -1.8151489867665974e-09, 0), z_dir=(0, 0, -1)) * Cylinder(8.255, 11, mode=Mode.PRIVATE)
    with BuildSketch(Plane(origin=(-0.875, -6.803762241, 17), x_dir=(-1, 0, 0), z_dir=(0, 1, 0))) as chamfer2_piece_8b_section:
        Polygon((CHAMFER2_SIZE, 0), (0, -CHAMFER2_SIZE), (0, 0), align=None)
    chamfer2_piece_8b = extrude(amount=4.957607264, mode=Mode.PRIVATE)
    chamfer2_piece_8b = split(chamfer2_piece_8b, bisect_by=Plane(origin=(-0.875, -4.875, 17), z_dir=(0, -1, 0)), keep=Keep.TOP, mode=Mode.PRIVATE)
    chamfer2_piece_8b = chamfer2_piece_8b - Plane(origin=(0, -13.745, 17), x_dir=(-1.0, -1.8151489867665974e-09, 0), z_dir=(0, 0, -1)) * Cylinder(8.255, 13, mode=Mode.PRIVATE)
    chamfer2_piece_8 = chamfer2_piece_8a & chamfer2_piece_8b
    add(chamfer2_piece_8, mode=Mode.SUBTRACT)


solid = part.part
